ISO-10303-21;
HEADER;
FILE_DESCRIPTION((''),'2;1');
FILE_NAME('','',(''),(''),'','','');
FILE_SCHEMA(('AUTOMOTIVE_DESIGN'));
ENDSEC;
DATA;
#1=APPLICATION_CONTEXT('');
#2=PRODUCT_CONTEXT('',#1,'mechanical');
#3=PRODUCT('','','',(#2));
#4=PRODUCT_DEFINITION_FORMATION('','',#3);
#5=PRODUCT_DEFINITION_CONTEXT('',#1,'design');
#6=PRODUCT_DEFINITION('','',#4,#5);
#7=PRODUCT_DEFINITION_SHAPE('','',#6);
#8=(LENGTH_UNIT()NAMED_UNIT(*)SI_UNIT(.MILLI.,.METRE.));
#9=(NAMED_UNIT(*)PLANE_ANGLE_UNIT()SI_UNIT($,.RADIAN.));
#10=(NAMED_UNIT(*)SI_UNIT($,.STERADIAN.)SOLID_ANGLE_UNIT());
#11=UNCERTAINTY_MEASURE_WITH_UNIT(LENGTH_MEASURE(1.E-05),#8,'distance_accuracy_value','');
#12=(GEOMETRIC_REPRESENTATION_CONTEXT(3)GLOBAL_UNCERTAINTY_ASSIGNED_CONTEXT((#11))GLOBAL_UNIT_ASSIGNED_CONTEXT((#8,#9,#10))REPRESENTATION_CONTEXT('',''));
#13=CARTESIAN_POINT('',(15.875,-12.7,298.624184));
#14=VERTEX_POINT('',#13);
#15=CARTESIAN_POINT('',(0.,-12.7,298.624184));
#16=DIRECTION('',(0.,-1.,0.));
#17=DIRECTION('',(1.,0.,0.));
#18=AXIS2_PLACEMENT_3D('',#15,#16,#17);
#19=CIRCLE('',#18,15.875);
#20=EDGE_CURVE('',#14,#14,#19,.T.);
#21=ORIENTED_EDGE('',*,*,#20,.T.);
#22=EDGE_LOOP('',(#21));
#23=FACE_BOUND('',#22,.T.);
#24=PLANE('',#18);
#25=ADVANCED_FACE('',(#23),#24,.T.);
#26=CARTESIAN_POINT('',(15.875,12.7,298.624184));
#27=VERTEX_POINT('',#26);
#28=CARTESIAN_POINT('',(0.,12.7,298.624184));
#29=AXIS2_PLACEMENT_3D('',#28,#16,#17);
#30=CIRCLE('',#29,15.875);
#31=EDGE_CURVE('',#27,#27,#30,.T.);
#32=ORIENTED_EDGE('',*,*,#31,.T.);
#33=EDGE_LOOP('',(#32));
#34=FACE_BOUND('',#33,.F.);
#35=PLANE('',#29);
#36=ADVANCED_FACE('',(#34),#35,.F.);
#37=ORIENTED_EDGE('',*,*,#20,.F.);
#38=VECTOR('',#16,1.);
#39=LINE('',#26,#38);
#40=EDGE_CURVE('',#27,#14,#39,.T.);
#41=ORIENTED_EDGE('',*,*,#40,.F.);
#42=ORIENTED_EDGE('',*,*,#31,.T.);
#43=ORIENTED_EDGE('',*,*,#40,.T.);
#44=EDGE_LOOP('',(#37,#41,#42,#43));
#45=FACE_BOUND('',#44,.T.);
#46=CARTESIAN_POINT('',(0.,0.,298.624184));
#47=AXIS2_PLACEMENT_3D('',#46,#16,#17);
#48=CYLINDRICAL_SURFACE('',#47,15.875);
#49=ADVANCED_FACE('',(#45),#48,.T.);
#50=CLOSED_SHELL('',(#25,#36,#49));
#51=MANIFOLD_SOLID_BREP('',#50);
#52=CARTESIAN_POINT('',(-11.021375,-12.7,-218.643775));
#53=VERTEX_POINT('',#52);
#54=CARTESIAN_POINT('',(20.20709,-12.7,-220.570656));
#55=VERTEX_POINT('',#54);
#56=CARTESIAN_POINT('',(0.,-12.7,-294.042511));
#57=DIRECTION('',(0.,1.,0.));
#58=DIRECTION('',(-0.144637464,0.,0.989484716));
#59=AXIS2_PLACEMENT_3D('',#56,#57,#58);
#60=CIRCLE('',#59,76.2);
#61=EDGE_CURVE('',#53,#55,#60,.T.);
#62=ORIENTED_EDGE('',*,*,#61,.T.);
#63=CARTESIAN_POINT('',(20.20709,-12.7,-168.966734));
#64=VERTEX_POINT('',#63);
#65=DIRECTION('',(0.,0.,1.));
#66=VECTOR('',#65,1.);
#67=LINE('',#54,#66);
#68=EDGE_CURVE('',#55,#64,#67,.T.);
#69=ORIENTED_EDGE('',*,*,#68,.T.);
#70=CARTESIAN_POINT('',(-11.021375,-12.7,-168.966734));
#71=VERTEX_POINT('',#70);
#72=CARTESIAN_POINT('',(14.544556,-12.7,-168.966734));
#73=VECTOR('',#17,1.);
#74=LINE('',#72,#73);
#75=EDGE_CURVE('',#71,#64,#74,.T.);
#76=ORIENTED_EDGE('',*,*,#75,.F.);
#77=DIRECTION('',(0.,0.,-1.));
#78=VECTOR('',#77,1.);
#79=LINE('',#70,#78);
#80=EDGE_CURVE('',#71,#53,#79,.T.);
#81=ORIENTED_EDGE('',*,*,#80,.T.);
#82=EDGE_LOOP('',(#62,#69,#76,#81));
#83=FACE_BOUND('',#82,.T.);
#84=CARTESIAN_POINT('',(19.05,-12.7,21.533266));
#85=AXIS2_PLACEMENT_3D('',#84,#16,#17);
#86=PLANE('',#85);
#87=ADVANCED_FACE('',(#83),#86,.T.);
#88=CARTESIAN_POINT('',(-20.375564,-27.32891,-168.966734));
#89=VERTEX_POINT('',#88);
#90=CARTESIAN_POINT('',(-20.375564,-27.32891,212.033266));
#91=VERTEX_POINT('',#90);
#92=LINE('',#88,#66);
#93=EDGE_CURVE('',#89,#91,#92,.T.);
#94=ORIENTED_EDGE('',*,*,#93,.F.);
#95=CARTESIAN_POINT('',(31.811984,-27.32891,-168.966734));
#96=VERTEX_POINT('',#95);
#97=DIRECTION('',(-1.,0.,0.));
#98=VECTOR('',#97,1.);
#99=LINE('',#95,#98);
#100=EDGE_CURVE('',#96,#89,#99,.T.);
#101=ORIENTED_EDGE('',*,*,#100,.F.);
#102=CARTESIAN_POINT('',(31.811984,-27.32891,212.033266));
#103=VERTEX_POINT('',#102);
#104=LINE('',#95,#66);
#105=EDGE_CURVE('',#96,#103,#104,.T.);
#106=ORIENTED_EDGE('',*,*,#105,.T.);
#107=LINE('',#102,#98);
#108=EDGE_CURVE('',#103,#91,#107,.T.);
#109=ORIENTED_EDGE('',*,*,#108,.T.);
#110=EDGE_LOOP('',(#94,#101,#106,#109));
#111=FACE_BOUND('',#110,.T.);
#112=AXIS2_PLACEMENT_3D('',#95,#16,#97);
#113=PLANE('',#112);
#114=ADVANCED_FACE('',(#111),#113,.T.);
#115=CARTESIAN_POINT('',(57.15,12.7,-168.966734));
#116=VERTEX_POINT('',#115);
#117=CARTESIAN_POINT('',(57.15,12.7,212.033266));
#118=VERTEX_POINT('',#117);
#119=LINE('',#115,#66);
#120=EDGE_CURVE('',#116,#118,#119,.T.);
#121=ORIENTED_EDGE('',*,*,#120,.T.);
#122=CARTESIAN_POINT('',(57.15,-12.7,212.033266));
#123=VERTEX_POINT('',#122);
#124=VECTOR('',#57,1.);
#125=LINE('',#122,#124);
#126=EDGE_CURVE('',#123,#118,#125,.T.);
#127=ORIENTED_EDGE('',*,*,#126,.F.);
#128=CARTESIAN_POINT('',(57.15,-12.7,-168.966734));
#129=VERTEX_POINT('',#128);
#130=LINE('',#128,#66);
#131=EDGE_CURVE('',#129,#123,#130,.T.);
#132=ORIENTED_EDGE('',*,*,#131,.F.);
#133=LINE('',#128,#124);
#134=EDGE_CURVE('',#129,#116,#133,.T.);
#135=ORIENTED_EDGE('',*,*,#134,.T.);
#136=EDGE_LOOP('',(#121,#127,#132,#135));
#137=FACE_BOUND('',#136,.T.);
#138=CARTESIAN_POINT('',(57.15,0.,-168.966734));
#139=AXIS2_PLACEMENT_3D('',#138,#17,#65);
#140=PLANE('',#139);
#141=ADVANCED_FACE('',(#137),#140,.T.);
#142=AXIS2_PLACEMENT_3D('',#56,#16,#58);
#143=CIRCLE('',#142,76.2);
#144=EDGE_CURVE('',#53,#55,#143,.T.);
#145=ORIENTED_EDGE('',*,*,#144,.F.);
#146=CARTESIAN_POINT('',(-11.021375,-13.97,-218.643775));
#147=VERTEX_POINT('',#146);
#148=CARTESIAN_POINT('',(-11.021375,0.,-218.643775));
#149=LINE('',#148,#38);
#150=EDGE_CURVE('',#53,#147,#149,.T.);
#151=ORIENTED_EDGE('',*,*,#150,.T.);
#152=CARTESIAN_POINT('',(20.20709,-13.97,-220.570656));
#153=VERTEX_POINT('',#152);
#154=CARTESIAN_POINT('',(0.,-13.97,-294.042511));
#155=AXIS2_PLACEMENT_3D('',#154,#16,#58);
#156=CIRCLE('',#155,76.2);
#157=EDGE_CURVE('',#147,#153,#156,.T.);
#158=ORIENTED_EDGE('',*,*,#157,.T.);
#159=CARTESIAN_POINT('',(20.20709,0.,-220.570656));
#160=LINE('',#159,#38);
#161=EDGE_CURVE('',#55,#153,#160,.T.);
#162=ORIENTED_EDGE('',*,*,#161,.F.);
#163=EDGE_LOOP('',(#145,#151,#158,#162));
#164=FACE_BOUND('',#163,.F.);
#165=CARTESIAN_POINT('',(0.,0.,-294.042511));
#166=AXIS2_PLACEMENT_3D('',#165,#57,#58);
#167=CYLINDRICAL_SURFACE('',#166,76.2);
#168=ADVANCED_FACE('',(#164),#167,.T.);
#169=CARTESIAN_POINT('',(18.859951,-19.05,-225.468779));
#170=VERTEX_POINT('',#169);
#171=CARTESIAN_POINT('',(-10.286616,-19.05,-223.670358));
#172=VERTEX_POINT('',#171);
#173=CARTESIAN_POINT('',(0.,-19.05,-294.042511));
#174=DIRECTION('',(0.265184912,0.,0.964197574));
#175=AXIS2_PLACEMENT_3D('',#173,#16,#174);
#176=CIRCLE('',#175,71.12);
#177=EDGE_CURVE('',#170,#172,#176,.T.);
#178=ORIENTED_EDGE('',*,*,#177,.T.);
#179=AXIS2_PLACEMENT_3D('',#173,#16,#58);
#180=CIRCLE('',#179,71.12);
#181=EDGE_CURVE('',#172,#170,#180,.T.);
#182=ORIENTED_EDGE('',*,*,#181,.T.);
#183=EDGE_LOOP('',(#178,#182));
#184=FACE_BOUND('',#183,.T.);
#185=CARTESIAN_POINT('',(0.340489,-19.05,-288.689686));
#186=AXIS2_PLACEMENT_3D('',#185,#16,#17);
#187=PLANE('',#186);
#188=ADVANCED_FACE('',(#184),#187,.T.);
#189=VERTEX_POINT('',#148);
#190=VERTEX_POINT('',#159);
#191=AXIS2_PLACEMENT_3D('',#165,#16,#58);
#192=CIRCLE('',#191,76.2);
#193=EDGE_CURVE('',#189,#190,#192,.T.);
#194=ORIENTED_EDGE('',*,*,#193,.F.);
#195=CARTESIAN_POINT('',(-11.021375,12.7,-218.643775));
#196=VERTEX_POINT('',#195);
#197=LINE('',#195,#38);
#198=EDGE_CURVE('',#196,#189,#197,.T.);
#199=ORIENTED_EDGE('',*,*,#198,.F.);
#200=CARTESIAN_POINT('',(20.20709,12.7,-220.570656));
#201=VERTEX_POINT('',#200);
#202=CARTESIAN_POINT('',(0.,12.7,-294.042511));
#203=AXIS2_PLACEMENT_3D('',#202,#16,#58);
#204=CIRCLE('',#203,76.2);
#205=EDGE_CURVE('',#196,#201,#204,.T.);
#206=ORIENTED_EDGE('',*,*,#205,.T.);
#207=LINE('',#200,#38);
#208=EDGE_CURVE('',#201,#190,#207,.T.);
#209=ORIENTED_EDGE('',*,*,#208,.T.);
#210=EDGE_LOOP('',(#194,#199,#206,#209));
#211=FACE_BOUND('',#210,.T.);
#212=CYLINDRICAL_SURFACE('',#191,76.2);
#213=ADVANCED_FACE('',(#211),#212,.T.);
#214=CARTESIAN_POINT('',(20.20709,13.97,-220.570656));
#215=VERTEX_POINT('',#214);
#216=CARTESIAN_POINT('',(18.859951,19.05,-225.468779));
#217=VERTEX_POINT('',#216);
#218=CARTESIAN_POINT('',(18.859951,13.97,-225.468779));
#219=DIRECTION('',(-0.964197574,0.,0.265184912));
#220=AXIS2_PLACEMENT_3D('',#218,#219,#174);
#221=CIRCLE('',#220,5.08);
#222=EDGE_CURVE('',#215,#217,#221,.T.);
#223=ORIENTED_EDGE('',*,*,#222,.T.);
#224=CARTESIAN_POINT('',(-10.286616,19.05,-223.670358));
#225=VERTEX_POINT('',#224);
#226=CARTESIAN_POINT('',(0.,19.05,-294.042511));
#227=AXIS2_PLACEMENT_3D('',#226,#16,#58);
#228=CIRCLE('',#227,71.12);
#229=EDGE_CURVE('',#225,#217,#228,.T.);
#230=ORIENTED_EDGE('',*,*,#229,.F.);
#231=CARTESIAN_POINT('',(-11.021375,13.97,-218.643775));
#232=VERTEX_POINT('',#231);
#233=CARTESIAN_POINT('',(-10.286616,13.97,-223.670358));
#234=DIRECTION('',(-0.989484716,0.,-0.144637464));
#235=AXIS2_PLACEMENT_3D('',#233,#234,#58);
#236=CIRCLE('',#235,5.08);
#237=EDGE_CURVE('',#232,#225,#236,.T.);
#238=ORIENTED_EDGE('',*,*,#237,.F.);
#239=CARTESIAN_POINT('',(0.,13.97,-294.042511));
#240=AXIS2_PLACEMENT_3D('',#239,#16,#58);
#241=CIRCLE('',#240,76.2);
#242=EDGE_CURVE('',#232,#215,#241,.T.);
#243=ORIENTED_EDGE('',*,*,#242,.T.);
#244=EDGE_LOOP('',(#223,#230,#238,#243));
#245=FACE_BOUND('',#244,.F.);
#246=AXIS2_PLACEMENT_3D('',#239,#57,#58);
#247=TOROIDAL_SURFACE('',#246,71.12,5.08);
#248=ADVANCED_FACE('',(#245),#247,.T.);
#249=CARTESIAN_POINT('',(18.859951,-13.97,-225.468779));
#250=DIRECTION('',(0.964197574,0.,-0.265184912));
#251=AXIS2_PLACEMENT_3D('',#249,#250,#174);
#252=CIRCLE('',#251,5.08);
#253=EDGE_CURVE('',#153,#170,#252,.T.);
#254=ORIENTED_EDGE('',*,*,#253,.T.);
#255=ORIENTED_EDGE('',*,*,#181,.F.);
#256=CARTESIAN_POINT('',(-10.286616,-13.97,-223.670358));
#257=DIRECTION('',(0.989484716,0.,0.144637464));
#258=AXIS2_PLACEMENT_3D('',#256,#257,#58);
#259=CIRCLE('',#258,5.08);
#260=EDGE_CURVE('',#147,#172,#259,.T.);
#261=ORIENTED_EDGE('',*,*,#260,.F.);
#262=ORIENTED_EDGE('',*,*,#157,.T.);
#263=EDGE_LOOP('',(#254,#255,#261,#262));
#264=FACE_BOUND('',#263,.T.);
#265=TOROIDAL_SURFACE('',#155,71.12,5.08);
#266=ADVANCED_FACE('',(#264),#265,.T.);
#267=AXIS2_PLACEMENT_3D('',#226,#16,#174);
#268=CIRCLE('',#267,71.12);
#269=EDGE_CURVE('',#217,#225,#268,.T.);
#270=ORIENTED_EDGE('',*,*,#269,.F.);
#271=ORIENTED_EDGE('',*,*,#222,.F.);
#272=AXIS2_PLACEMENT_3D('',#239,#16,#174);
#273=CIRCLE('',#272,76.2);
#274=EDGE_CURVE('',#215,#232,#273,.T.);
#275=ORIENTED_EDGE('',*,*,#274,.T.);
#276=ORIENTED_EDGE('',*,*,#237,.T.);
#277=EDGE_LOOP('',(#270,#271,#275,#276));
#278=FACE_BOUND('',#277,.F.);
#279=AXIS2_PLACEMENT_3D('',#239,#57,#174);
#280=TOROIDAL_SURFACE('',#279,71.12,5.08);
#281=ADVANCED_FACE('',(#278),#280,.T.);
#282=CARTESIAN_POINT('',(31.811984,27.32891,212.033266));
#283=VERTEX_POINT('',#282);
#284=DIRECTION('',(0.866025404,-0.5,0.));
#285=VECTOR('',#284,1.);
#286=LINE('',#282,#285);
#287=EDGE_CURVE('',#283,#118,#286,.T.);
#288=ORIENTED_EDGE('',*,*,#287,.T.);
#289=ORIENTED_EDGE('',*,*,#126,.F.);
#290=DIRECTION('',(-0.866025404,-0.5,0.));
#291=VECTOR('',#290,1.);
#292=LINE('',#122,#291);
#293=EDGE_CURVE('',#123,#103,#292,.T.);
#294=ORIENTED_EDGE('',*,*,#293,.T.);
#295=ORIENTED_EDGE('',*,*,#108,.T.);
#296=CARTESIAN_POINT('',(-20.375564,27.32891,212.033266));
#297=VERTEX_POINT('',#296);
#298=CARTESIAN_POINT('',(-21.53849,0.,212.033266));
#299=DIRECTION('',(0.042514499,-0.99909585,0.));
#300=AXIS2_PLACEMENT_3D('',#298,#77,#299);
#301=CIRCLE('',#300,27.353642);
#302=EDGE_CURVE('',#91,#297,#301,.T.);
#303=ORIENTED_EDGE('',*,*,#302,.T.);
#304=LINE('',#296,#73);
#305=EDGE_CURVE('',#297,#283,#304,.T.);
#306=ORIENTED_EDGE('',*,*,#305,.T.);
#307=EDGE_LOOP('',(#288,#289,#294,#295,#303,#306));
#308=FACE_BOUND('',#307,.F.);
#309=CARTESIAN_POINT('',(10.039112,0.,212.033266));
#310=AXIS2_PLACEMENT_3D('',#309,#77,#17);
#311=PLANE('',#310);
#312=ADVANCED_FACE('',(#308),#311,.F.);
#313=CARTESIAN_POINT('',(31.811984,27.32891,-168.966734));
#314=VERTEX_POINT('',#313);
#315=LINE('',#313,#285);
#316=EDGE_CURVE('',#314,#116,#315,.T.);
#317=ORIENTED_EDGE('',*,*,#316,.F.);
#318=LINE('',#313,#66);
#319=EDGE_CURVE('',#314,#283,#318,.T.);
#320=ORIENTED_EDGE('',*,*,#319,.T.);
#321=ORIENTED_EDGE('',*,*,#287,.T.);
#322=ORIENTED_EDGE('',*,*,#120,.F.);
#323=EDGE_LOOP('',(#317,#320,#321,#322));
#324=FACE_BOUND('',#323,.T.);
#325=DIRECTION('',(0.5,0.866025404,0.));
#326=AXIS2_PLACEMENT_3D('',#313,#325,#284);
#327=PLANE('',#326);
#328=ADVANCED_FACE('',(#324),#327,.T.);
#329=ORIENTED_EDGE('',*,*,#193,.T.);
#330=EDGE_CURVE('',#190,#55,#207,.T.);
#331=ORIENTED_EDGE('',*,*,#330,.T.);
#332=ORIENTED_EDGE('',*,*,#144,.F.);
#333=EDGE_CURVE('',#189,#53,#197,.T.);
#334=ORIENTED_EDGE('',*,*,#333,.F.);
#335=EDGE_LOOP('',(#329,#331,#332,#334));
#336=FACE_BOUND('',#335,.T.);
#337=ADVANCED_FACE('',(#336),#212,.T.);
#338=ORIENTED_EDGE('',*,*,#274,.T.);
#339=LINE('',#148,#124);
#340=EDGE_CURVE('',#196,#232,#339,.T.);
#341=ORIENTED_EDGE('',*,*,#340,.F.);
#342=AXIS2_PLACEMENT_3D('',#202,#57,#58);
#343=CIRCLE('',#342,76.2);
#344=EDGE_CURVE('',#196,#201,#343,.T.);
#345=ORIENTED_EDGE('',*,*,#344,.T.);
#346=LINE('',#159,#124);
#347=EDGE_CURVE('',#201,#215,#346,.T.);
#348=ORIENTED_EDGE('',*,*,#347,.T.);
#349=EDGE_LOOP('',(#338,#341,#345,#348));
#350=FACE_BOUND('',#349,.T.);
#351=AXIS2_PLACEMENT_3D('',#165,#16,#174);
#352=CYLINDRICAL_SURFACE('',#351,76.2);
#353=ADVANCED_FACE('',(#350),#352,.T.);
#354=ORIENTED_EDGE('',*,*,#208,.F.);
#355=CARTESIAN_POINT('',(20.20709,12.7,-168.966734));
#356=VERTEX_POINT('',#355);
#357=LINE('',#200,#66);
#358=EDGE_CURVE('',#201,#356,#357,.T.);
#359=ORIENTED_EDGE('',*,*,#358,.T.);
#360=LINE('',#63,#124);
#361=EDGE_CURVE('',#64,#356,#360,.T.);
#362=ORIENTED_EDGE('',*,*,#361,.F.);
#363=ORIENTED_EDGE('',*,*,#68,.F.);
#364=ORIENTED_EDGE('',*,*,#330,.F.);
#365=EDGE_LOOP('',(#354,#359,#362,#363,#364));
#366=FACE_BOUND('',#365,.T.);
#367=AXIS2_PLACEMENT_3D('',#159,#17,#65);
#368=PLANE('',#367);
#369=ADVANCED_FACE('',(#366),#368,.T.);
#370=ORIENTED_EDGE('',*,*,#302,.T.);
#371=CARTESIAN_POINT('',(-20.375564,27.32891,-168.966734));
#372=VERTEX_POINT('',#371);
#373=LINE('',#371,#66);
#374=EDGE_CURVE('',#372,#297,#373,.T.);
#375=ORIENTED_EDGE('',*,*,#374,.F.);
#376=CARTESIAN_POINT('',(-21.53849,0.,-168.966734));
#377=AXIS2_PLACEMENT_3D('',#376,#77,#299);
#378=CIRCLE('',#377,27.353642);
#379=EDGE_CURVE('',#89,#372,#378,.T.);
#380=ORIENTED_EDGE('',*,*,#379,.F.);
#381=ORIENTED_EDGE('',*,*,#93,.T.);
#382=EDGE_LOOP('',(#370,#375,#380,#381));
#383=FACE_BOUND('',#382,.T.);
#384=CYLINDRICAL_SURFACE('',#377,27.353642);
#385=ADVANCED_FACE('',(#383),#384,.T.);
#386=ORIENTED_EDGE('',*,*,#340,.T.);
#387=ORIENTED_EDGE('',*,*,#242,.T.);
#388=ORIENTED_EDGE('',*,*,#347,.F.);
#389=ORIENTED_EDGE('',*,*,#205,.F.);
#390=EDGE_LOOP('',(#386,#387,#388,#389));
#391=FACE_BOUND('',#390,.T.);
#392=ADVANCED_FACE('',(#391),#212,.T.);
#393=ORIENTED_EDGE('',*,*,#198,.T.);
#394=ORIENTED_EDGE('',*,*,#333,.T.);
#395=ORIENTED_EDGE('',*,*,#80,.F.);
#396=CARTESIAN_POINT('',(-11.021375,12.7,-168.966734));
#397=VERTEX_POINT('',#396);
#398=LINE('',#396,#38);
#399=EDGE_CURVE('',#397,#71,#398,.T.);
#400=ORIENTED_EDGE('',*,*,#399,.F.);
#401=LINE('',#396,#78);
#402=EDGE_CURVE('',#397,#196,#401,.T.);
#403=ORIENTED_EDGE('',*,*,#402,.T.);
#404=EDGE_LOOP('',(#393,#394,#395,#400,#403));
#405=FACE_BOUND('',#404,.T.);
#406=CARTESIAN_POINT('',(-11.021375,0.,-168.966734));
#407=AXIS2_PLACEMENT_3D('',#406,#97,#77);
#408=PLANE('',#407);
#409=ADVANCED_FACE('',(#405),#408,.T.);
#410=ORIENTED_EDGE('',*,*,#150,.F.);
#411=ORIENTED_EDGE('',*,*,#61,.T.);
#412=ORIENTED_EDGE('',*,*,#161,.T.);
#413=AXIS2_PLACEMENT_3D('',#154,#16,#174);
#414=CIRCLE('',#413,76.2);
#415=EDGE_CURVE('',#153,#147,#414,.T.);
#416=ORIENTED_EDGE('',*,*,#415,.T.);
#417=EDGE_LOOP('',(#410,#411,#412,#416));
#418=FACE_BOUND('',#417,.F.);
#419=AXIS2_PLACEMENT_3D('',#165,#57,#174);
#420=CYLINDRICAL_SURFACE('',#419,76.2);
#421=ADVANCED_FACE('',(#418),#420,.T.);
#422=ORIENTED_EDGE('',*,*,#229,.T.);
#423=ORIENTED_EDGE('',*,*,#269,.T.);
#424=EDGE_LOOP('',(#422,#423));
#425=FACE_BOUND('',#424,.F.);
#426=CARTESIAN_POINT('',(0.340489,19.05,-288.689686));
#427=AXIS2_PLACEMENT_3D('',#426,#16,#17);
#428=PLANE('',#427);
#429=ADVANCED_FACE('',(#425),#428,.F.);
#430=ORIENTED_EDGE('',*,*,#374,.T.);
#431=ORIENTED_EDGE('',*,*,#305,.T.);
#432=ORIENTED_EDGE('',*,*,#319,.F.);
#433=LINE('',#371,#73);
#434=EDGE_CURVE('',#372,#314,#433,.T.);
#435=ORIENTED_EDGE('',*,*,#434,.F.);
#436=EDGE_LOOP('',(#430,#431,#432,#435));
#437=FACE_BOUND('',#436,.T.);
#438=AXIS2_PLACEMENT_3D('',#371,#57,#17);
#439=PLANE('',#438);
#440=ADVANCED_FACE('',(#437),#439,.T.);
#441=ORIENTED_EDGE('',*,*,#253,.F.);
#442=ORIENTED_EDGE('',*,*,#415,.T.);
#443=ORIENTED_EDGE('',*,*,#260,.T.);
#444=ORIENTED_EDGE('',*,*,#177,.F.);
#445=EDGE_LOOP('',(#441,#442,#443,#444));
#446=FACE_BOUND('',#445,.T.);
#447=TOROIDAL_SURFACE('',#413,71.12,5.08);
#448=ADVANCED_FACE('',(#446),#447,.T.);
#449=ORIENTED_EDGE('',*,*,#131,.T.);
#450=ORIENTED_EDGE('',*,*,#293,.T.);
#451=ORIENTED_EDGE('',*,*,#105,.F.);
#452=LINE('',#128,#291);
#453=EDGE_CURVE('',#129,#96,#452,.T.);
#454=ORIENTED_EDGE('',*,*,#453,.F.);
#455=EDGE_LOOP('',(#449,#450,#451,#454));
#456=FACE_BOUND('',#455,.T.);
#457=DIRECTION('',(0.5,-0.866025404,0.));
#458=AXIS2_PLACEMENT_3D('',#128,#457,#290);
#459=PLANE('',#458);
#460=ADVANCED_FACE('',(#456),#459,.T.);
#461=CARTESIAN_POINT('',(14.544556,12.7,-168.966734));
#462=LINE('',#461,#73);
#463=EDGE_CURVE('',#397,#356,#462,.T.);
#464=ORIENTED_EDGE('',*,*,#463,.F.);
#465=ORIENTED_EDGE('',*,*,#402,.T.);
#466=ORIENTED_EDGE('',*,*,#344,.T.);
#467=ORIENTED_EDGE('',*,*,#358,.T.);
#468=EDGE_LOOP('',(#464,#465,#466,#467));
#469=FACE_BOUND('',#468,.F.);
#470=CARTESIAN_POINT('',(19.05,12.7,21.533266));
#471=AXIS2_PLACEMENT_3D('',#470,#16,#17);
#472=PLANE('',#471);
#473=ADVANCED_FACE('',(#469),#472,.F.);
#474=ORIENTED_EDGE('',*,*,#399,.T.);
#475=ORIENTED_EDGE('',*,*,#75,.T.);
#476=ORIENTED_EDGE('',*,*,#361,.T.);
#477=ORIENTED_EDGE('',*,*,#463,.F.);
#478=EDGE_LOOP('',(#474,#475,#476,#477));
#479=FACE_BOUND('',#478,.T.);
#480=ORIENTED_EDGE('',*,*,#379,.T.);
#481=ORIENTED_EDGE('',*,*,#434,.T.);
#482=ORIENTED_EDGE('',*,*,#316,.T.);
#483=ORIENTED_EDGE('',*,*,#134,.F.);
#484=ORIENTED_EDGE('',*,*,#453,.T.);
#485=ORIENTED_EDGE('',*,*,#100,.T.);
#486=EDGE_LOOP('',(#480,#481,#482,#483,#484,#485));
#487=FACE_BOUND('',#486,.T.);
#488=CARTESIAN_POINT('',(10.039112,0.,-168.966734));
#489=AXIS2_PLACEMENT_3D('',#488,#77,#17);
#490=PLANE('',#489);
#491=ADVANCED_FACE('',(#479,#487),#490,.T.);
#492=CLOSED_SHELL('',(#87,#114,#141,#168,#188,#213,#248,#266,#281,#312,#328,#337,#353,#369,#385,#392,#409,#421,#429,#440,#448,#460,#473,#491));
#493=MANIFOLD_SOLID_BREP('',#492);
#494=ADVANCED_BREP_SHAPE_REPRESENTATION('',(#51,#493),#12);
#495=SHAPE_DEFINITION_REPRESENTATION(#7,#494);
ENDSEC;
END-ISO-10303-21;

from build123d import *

# Parameters (mm, degrees)
F1_DEPTH = 12.7
F0_R     = 15.875
F2_DEPTH = 12.7
F3_DEPTH = 19.05
F5_DEPTH = 381
F6_R     = 5.08


with BuildPart() as f1:
    # F0 (on Front) → F1 (new body, symmetric)
    with BuildSketch(Plane.XZ):
        Polygon((57.15, 212.0332655495), (-19.05, 212.0332655495), (-19.05, -168.9667344505), (-11.0213747248, -168.9667344505), (0, -168.9667344505), (17.0811599865, -168.9667344505), (20.2070903033, -168.9667344505), (57.15, -168.9667344505), align=None)
        with BuildLine():
            Line((0, -168.9667344505), (-11.0213747248, -168.9667344505))
            Line((-11.0213747248, -168.9667344505), (-11.0213747248, -218.6437752822))
            ThreePointArc((-11.0213747248, -218.6437752822), (4.6928199973, -217.9871529405), (20.2070903033, -220.5706555117))
            Line((20.2070903033, -220.5706555117), (20.2070903033, -168.9667344505))
            Line((20.2070903033, -168.9667344505), (17.0811599865, -168.9667344505))
            Line((17.0811599865, -168.9667344505), (0, -168.9667344505))
        make_face()
    extrude(amount=F1_DEPTH, both=True)



with BuildPart() as f1b:
    # F0 (on Front) → F1, piece 2 (new body, symmetric)
    with BuildSketch(Plane.XZ):
        with BuildLine():
            Line((-11.0213747248, -232.3558569366), (-11.0213747248, -218.6437752822))
            ThreePointArc((-11.0213747248, -218.6437752822), (-49.8327765932, -351.6891443779), (76.2, -294.0425106773))
            ThreePointArc((76.2, -294.0425106773), (60.6061889625, -247.8545267481), (20.2070903033, -220.5706555117))
            Line((20.2070903033, -220.5706555117), (20.2070903033, -232.3558569366))
            Line((20.2070903033, -232.3558569366), (-11.0213747248, -232.3558569366))
        make_face()
    extrude(amount=F1_DEPTH, both=True)


with BuildPart() as f2:
    # F0 (on Front) → F2 (new body, symmetric)
    with BuildSketch(Plane.XZ):
        with Locations((0, 298.6241839262)):
            Circle(F0_R)
    extrude(amount=F2_DEPTH, both=True)


with BuildPart() as f1_1:
    add(f1.part)

    add(f1b.part)  # F3 merges F1b
    # F0 (on Front) → F3 (join, symmetric)
    with BuildSketch(Plane.XZ):
        with BuildLine():
            Line((-11.0213747248, -232.3558569366), (-11.0213747248, -218.6437752822))
            ThreePointArc((-11.0213747248, -218.6437752822), (-49.8327765932, -351.6891443779), (76.2, -294.0425106773))
            ThreePointArc((76.2, -294.0425106773), (60.6061889625, -247.8545267481), (20.2070903033, -220.5706555117))
            Line((20.2070903033, -220.5706555117), (20.2070903033, -232.3558569366))
            Line((20.2070903033, -232.3558569366), (-11.0213747248, -232.3558569366))
        make_face()
        with BuildLine():
            ThreePointArc((20.2070903033, -220.5706555117), (4.6928199973, -217.9871529405), (-11.0213747248, -218.6437752822))
            Line((-11.0213747248, -218.6437752822), (-11.0213747248, -232.3558569366))
            Line((-11.0213747248, -232.3558569366), (20.2070903033, -232.3558569366))
            Line((20.2070903033, -232.3558569366), (20.2070903033, -220.5706555117))
        make_face()
    extrude(amount=F3_DEPTH, both=True)

    # F4 (on face) → F5 (join, through all)
    with BuildSketch(Plane(origin=(0, 0, -168.9667344505), x_dir=(1, 0, 0), z_dir=(0, 0, -1))):
        with BuildLine():
            Line((31.8119843732, 27.3289101429), (-20.3755640355, 27.3289101429))
            ThreePointArc((-20.3755640355, 27.3289101429), (-48.8921323698, 0), (-20.3755640355, -27.3289101429))
            Line((-20.3755640355, -27.3289101429), (31.8119843732, -27.3289101429))
            Line((31.8119843732, -27.3289101429), (57.15, -12.7))
            Line((57.15, -12.7), (20.2070903033, -12.7))
            Line((20.2070903033, -12.7), (20.2070903033, 12.7))
            Line((20.2070903033, 12.7), (57.15, 12.7))
            Line((57.15, 12.7), (31.8119843732, 27.3289101429))
        make_face()
        Polygon((57.15, 0), (57.15, 12.7), (20.2070903033, 12.7), (20.2070903033, -12.7), (57.15, -12.7), align=None)
    extrude(amount=-F5_DEPTH)

    # F6
    f6_edges = [f1_1.edges().sort_by_distance(p)[0] for p in [
        (-76.2, -19.05, -294.042511),
        (-76.2, 19.05, -294.042511),
    ]]
    fillet(f6_edges, radius=F6_R)


solid = Compound([f2.part, f1_1.part])
